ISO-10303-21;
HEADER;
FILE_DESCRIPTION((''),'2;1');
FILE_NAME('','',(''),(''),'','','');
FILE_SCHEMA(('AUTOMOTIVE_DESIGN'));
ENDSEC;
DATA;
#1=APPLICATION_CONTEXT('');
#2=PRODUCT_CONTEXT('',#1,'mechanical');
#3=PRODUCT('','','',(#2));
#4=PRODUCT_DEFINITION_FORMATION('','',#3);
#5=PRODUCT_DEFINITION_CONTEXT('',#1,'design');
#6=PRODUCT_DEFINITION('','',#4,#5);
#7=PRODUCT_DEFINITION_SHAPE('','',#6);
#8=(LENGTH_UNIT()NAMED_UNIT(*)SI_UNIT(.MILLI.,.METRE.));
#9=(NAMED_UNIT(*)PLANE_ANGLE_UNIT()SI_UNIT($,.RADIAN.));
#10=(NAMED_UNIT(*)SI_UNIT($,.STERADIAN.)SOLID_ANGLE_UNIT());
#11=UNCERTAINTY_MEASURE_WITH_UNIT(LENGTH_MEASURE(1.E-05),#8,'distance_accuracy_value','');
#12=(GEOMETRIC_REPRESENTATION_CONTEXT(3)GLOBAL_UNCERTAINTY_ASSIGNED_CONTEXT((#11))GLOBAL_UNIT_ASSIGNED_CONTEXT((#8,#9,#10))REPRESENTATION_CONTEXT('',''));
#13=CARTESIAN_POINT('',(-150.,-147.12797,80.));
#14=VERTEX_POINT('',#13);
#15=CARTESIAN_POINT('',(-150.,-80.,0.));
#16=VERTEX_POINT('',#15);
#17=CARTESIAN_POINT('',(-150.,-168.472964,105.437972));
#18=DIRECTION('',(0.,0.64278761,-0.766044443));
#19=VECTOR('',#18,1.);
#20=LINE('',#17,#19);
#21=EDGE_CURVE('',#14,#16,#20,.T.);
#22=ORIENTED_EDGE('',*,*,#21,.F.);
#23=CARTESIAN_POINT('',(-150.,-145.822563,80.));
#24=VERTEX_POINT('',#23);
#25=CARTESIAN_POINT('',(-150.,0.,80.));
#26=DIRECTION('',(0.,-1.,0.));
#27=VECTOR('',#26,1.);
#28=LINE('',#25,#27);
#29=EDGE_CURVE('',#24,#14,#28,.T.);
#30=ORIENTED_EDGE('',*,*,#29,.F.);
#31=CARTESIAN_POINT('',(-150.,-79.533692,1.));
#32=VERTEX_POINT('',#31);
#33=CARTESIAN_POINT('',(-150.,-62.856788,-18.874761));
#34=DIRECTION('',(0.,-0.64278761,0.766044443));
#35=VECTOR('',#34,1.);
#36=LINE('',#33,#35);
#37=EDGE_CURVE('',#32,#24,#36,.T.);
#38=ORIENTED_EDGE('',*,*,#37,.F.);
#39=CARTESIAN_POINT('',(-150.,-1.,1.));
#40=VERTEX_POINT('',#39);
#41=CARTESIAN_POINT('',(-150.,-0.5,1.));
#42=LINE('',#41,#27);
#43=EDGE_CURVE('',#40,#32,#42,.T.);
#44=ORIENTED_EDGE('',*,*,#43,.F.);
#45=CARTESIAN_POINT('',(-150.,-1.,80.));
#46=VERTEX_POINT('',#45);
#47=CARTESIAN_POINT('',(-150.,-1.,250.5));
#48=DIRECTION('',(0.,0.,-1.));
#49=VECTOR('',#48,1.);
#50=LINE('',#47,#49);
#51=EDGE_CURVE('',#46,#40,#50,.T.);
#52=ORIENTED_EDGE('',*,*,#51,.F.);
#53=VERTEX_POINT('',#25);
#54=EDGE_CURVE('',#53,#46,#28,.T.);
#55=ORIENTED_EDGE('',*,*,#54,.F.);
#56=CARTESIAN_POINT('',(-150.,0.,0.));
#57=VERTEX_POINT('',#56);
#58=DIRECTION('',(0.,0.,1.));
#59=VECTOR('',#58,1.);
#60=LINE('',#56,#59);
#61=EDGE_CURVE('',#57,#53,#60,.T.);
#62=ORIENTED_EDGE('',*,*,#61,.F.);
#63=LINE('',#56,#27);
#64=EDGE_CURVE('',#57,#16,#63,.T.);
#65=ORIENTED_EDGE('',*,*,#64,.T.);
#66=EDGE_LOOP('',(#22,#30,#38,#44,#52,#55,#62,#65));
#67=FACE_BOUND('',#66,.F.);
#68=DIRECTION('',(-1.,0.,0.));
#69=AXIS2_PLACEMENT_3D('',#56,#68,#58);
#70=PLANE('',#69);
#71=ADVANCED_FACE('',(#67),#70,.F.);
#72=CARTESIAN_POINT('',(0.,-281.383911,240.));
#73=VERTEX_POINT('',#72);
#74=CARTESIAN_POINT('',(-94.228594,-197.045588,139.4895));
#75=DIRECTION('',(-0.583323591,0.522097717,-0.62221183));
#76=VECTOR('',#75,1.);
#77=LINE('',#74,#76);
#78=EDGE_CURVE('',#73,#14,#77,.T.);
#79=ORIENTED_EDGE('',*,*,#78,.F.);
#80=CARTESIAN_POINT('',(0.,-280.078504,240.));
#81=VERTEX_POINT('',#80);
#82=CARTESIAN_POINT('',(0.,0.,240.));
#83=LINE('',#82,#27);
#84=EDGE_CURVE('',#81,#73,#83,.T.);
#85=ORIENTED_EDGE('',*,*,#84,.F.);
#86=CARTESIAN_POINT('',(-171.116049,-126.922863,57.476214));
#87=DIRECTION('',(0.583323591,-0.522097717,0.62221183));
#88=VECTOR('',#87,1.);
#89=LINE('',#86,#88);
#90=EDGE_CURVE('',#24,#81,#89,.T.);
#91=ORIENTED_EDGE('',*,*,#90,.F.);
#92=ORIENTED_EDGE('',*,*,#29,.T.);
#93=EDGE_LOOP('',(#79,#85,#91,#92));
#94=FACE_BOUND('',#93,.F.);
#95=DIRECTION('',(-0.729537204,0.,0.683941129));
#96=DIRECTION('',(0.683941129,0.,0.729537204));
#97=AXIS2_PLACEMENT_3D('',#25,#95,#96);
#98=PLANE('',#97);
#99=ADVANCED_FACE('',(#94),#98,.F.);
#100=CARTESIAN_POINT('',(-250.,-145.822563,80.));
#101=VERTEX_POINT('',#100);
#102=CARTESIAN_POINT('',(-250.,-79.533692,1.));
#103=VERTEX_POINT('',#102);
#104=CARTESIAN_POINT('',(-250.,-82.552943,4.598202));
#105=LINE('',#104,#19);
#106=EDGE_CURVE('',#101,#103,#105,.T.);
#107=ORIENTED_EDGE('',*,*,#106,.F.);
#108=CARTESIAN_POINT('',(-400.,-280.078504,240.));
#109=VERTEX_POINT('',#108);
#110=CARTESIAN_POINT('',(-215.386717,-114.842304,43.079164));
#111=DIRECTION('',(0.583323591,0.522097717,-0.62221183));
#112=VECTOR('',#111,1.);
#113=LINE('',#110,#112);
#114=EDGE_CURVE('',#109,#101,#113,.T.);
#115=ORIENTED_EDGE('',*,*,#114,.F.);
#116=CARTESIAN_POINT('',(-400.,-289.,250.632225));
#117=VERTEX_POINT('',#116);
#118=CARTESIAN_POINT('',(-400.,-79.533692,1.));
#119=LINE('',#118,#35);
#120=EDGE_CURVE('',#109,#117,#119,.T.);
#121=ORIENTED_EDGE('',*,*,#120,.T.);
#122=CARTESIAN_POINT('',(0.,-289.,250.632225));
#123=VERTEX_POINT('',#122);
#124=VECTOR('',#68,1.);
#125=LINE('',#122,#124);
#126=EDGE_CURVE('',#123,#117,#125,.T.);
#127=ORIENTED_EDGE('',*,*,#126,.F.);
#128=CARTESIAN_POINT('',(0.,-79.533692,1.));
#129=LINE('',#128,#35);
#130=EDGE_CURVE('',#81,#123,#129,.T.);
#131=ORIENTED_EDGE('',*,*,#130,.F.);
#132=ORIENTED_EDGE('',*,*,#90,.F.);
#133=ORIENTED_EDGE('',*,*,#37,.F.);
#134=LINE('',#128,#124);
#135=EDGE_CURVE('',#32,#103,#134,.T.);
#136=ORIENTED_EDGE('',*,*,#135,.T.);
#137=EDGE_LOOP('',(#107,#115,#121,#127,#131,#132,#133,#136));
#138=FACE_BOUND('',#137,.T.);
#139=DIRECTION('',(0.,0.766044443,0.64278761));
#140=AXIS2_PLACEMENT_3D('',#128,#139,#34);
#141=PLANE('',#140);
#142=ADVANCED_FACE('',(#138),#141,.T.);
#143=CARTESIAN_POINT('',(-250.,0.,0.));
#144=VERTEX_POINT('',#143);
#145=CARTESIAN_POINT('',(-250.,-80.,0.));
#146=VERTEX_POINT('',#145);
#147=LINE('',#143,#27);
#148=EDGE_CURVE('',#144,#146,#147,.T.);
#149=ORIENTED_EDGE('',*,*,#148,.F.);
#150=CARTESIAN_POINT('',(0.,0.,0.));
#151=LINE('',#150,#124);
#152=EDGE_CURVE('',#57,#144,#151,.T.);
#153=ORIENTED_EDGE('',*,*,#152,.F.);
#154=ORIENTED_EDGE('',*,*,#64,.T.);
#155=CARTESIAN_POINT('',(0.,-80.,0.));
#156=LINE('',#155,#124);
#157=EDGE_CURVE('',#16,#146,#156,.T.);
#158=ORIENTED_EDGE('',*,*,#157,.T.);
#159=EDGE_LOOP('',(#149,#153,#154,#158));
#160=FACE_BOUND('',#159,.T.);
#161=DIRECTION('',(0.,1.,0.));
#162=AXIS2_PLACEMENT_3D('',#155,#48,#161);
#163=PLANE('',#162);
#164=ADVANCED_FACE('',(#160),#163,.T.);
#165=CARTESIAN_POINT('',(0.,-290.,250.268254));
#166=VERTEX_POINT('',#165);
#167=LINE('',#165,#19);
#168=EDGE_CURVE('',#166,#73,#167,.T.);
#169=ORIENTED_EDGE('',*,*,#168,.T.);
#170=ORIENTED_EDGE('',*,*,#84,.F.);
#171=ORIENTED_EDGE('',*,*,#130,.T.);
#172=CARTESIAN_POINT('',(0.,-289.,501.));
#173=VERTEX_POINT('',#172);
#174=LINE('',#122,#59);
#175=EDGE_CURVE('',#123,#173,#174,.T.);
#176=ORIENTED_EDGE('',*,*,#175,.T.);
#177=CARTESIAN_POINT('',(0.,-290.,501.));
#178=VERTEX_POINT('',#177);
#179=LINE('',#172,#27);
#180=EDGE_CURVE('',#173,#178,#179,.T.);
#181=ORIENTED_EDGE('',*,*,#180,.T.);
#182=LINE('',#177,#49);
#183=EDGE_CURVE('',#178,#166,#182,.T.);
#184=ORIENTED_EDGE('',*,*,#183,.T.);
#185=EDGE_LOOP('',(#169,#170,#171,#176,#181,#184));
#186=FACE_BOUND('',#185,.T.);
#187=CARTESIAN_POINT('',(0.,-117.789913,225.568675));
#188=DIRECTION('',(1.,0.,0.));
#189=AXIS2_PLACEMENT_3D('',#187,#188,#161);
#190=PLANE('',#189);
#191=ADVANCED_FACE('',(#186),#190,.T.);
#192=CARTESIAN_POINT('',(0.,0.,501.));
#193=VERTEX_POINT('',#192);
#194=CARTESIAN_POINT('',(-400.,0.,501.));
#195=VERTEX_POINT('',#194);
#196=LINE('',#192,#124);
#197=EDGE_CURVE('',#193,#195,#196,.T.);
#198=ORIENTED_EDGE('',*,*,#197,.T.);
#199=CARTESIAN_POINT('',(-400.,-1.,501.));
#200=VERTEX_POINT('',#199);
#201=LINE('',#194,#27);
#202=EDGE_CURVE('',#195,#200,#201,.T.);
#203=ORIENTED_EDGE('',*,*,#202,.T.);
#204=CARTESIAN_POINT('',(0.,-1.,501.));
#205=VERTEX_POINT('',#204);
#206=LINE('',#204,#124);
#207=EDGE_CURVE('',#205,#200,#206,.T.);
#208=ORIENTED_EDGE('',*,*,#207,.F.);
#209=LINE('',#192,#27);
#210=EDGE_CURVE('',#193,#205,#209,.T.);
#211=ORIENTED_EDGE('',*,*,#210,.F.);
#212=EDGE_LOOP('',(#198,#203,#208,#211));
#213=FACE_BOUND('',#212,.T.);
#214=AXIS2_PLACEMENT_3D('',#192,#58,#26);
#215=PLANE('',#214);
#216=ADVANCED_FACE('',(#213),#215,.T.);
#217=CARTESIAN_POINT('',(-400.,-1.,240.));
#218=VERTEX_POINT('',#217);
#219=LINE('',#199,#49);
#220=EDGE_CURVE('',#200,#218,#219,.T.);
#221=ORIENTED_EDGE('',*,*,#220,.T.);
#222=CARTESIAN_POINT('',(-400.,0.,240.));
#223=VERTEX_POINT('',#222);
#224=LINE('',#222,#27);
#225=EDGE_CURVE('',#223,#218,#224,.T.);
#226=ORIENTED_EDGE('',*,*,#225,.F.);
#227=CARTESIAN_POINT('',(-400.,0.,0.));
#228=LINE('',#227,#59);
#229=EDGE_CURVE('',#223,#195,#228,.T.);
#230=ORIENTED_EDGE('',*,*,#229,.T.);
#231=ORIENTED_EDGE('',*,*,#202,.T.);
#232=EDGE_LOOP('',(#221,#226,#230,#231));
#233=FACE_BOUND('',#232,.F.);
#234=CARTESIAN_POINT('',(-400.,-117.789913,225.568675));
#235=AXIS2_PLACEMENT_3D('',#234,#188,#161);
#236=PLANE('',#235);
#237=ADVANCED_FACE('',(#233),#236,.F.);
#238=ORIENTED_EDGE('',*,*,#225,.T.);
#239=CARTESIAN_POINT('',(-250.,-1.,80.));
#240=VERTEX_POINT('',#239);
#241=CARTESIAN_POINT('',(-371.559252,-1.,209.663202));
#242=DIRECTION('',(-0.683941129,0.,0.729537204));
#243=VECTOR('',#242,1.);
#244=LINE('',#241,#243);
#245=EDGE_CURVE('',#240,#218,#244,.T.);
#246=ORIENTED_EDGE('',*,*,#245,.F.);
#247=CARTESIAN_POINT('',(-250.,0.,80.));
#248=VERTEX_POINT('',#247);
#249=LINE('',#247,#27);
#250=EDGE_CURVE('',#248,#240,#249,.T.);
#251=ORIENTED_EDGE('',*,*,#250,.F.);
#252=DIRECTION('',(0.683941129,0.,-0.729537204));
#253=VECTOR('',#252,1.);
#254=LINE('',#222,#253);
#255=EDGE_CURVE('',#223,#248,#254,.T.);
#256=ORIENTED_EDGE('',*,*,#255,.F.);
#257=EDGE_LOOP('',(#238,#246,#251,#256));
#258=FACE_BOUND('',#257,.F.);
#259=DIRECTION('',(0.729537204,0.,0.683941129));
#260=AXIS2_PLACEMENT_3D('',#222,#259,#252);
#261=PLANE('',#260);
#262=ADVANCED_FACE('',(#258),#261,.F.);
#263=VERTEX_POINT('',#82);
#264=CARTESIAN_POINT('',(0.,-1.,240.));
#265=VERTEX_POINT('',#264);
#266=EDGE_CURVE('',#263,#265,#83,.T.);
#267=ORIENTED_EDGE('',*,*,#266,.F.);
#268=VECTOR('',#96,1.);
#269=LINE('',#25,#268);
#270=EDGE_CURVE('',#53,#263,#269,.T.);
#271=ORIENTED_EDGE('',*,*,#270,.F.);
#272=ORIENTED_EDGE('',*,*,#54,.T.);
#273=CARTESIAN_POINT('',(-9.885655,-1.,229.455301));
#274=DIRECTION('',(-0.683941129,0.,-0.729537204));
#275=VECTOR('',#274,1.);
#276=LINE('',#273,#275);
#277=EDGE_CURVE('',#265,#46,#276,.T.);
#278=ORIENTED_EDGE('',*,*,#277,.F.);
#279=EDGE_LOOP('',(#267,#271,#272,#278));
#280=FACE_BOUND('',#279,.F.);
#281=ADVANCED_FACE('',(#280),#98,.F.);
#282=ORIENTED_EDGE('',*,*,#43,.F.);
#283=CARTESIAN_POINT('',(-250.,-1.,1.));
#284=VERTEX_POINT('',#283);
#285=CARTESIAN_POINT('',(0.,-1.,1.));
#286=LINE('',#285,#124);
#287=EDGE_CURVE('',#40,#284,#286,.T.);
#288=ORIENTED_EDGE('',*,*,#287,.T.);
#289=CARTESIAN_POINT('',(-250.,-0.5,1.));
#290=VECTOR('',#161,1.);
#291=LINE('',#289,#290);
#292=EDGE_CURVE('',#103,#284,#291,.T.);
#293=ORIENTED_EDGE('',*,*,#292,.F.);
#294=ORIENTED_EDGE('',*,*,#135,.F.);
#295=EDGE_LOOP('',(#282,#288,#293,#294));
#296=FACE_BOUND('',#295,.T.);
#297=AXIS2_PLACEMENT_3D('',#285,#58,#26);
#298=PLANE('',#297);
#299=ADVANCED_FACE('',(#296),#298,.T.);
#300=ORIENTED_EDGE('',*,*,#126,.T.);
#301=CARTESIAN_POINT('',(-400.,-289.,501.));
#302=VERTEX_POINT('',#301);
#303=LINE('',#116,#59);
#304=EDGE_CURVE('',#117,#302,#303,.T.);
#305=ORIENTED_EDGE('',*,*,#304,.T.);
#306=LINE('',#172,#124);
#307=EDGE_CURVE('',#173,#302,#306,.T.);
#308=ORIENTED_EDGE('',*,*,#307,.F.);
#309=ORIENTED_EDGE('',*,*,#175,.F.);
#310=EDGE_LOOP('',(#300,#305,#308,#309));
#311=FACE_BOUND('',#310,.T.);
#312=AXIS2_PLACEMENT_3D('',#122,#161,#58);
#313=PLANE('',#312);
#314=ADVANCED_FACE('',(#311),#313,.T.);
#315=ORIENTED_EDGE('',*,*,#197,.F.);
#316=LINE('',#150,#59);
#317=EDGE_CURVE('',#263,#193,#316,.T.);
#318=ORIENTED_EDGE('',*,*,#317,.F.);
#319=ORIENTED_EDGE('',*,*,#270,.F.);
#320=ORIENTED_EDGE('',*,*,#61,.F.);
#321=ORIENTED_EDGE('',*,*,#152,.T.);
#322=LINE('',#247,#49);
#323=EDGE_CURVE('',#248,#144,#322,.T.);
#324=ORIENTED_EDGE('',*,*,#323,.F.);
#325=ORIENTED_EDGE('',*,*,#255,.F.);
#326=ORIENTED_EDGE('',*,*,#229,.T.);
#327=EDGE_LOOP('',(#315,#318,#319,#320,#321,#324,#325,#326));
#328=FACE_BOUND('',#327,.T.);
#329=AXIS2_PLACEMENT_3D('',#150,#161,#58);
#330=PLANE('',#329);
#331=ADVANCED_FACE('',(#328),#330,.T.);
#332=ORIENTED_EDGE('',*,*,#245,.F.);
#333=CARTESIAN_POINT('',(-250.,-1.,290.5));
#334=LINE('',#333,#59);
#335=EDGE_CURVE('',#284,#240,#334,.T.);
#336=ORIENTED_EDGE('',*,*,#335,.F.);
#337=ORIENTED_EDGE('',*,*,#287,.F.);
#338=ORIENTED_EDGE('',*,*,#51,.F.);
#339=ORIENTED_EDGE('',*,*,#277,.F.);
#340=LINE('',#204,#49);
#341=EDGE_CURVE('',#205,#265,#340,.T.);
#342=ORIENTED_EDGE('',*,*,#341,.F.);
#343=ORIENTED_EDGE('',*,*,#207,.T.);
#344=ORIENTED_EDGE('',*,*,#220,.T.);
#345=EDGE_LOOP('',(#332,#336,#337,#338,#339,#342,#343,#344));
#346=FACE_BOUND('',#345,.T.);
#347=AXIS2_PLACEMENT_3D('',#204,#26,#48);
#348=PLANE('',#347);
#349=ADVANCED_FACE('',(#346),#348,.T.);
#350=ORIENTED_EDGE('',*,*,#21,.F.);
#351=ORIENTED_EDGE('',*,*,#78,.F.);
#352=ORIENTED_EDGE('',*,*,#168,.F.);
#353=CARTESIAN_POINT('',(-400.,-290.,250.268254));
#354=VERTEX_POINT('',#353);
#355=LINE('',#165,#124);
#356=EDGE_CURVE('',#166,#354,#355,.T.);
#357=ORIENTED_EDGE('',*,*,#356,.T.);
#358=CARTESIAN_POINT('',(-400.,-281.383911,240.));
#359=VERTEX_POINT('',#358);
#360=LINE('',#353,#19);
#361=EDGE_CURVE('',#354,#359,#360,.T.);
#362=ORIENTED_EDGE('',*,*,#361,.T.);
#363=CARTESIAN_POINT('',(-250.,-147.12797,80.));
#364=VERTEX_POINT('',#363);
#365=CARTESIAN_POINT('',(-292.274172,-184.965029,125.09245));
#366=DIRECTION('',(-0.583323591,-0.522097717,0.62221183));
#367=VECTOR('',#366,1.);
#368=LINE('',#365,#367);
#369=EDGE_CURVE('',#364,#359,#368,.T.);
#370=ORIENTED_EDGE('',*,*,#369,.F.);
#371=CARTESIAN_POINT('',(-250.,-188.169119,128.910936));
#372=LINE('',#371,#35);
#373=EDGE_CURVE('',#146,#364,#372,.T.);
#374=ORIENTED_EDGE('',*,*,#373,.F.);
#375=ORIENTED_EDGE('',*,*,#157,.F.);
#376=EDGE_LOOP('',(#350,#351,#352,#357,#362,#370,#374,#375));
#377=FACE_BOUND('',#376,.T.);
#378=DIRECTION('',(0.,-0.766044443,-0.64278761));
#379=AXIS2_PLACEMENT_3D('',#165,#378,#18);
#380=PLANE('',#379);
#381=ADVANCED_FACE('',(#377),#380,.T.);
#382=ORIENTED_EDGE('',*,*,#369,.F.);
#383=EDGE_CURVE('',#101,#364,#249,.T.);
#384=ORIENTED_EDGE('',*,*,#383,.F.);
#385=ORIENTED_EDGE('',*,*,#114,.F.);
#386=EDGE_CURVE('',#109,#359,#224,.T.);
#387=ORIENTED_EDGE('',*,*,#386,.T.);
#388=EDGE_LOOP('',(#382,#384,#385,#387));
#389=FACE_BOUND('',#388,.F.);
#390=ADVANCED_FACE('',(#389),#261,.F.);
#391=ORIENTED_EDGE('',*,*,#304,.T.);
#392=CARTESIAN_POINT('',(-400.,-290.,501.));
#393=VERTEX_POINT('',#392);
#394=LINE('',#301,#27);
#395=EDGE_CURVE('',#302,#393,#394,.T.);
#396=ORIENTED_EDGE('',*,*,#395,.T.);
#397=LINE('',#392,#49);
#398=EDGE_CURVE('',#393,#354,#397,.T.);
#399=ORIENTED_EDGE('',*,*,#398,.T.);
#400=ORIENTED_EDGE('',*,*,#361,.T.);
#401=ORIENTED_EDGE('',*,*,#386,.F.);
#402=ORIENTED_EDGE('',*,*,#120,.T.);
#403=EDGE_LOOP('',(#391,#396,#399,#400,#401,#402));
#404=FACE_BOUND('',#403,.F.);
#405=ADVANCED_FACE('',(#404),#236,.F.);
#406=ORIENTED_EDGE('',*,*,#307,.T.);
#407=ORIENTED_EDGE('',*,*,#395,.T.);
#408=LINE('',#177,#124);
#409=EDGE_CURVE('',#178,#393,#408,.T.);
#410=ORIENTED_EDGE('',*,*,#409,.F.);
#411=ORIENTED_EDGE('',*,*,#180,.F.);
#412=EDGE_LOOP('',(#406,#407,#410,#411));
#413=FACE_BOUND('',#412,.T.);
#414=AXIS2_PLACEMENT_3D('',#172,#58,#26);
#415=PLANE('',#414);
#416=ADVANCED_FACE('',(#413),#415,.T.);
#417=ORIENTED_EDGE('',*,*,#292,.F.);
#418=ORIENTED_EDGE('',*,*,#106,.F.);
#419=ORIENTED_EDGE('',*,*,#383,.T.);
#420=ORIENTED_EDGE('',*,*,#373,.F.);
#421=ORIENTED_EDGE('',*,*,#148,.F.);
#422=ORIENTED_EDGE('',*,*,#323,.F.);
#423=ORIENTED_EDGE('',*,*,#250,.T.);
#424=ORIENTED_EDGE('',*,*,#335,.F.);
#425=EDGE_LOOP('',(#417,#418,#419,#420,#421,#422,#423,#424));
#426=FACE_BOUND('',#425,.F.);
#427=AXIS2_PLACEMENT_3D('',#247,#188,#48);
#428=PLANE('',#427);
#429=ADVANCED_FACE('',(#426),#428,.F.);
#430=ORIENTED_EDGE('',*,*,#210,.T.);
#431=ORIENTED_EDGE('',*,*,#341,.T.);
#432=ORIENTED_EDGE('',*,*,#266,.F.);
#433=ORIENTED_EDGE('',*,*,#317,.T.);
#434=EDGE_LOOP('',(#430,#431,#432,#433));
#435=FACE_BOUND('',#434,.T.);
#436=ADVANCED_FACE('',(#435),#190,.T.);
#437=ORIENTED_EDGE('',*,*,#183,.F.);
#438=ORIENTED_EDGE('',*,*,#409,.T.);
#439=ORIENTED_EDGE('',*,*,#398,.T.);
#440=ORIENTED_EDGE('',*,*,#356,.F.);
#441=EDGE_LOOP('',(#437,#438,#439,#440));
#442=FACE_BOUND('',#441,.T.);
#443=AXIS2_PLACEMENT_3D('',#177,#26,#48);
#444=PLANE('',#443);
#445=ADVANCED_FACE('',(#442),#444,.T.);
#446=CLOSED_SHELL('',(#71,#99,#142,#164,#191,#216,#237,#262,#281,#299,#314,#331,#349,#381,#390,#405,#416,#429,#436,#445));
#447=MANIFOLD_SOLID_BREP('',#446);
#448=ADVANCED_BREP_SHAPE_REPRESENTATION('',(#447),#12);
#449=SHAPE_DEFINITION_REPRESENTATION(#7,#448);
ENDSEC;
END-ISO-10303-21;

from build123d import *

# Parameters (mm, degrees)
F1_DEPTH = 400
F3_DEPTH = 290.001


# Not quite as in the source:
# - a feature names something its author has since deleted; it is built from what else it names


with BuildPart() as f1:
    # F0 (on Right) → F1 (new body)
    with BuildSketch(Plane.YZ):
        Polygon((-80, 0), (0, 0), (0, 501), (-1, 501), (-1, 1), (-79.5336923418, 1), (-289, 250.6322246791), (-289, 501), (-290, 501), (-290, 250.2682544448), align=None)
    extrude(amount=-F1_DEPTH)

    # F2 (on face) → F3 (cut, through all)
    with BuildSketch(Plane(origin=(0, 0, 0), x_dir=(-1, 0, 0), z_dir=(0, 1, 0))):
        Polygon((400, 0), (400, 240), (250, 80), (250, 0), align=None)
        Polygon((0, 0), (150, 0), (150, 80), (0, 240), align=None)
    extrude(amount=-F3_DEPTH, mode=Mode.SUBTRACT)


solid = f1.part
